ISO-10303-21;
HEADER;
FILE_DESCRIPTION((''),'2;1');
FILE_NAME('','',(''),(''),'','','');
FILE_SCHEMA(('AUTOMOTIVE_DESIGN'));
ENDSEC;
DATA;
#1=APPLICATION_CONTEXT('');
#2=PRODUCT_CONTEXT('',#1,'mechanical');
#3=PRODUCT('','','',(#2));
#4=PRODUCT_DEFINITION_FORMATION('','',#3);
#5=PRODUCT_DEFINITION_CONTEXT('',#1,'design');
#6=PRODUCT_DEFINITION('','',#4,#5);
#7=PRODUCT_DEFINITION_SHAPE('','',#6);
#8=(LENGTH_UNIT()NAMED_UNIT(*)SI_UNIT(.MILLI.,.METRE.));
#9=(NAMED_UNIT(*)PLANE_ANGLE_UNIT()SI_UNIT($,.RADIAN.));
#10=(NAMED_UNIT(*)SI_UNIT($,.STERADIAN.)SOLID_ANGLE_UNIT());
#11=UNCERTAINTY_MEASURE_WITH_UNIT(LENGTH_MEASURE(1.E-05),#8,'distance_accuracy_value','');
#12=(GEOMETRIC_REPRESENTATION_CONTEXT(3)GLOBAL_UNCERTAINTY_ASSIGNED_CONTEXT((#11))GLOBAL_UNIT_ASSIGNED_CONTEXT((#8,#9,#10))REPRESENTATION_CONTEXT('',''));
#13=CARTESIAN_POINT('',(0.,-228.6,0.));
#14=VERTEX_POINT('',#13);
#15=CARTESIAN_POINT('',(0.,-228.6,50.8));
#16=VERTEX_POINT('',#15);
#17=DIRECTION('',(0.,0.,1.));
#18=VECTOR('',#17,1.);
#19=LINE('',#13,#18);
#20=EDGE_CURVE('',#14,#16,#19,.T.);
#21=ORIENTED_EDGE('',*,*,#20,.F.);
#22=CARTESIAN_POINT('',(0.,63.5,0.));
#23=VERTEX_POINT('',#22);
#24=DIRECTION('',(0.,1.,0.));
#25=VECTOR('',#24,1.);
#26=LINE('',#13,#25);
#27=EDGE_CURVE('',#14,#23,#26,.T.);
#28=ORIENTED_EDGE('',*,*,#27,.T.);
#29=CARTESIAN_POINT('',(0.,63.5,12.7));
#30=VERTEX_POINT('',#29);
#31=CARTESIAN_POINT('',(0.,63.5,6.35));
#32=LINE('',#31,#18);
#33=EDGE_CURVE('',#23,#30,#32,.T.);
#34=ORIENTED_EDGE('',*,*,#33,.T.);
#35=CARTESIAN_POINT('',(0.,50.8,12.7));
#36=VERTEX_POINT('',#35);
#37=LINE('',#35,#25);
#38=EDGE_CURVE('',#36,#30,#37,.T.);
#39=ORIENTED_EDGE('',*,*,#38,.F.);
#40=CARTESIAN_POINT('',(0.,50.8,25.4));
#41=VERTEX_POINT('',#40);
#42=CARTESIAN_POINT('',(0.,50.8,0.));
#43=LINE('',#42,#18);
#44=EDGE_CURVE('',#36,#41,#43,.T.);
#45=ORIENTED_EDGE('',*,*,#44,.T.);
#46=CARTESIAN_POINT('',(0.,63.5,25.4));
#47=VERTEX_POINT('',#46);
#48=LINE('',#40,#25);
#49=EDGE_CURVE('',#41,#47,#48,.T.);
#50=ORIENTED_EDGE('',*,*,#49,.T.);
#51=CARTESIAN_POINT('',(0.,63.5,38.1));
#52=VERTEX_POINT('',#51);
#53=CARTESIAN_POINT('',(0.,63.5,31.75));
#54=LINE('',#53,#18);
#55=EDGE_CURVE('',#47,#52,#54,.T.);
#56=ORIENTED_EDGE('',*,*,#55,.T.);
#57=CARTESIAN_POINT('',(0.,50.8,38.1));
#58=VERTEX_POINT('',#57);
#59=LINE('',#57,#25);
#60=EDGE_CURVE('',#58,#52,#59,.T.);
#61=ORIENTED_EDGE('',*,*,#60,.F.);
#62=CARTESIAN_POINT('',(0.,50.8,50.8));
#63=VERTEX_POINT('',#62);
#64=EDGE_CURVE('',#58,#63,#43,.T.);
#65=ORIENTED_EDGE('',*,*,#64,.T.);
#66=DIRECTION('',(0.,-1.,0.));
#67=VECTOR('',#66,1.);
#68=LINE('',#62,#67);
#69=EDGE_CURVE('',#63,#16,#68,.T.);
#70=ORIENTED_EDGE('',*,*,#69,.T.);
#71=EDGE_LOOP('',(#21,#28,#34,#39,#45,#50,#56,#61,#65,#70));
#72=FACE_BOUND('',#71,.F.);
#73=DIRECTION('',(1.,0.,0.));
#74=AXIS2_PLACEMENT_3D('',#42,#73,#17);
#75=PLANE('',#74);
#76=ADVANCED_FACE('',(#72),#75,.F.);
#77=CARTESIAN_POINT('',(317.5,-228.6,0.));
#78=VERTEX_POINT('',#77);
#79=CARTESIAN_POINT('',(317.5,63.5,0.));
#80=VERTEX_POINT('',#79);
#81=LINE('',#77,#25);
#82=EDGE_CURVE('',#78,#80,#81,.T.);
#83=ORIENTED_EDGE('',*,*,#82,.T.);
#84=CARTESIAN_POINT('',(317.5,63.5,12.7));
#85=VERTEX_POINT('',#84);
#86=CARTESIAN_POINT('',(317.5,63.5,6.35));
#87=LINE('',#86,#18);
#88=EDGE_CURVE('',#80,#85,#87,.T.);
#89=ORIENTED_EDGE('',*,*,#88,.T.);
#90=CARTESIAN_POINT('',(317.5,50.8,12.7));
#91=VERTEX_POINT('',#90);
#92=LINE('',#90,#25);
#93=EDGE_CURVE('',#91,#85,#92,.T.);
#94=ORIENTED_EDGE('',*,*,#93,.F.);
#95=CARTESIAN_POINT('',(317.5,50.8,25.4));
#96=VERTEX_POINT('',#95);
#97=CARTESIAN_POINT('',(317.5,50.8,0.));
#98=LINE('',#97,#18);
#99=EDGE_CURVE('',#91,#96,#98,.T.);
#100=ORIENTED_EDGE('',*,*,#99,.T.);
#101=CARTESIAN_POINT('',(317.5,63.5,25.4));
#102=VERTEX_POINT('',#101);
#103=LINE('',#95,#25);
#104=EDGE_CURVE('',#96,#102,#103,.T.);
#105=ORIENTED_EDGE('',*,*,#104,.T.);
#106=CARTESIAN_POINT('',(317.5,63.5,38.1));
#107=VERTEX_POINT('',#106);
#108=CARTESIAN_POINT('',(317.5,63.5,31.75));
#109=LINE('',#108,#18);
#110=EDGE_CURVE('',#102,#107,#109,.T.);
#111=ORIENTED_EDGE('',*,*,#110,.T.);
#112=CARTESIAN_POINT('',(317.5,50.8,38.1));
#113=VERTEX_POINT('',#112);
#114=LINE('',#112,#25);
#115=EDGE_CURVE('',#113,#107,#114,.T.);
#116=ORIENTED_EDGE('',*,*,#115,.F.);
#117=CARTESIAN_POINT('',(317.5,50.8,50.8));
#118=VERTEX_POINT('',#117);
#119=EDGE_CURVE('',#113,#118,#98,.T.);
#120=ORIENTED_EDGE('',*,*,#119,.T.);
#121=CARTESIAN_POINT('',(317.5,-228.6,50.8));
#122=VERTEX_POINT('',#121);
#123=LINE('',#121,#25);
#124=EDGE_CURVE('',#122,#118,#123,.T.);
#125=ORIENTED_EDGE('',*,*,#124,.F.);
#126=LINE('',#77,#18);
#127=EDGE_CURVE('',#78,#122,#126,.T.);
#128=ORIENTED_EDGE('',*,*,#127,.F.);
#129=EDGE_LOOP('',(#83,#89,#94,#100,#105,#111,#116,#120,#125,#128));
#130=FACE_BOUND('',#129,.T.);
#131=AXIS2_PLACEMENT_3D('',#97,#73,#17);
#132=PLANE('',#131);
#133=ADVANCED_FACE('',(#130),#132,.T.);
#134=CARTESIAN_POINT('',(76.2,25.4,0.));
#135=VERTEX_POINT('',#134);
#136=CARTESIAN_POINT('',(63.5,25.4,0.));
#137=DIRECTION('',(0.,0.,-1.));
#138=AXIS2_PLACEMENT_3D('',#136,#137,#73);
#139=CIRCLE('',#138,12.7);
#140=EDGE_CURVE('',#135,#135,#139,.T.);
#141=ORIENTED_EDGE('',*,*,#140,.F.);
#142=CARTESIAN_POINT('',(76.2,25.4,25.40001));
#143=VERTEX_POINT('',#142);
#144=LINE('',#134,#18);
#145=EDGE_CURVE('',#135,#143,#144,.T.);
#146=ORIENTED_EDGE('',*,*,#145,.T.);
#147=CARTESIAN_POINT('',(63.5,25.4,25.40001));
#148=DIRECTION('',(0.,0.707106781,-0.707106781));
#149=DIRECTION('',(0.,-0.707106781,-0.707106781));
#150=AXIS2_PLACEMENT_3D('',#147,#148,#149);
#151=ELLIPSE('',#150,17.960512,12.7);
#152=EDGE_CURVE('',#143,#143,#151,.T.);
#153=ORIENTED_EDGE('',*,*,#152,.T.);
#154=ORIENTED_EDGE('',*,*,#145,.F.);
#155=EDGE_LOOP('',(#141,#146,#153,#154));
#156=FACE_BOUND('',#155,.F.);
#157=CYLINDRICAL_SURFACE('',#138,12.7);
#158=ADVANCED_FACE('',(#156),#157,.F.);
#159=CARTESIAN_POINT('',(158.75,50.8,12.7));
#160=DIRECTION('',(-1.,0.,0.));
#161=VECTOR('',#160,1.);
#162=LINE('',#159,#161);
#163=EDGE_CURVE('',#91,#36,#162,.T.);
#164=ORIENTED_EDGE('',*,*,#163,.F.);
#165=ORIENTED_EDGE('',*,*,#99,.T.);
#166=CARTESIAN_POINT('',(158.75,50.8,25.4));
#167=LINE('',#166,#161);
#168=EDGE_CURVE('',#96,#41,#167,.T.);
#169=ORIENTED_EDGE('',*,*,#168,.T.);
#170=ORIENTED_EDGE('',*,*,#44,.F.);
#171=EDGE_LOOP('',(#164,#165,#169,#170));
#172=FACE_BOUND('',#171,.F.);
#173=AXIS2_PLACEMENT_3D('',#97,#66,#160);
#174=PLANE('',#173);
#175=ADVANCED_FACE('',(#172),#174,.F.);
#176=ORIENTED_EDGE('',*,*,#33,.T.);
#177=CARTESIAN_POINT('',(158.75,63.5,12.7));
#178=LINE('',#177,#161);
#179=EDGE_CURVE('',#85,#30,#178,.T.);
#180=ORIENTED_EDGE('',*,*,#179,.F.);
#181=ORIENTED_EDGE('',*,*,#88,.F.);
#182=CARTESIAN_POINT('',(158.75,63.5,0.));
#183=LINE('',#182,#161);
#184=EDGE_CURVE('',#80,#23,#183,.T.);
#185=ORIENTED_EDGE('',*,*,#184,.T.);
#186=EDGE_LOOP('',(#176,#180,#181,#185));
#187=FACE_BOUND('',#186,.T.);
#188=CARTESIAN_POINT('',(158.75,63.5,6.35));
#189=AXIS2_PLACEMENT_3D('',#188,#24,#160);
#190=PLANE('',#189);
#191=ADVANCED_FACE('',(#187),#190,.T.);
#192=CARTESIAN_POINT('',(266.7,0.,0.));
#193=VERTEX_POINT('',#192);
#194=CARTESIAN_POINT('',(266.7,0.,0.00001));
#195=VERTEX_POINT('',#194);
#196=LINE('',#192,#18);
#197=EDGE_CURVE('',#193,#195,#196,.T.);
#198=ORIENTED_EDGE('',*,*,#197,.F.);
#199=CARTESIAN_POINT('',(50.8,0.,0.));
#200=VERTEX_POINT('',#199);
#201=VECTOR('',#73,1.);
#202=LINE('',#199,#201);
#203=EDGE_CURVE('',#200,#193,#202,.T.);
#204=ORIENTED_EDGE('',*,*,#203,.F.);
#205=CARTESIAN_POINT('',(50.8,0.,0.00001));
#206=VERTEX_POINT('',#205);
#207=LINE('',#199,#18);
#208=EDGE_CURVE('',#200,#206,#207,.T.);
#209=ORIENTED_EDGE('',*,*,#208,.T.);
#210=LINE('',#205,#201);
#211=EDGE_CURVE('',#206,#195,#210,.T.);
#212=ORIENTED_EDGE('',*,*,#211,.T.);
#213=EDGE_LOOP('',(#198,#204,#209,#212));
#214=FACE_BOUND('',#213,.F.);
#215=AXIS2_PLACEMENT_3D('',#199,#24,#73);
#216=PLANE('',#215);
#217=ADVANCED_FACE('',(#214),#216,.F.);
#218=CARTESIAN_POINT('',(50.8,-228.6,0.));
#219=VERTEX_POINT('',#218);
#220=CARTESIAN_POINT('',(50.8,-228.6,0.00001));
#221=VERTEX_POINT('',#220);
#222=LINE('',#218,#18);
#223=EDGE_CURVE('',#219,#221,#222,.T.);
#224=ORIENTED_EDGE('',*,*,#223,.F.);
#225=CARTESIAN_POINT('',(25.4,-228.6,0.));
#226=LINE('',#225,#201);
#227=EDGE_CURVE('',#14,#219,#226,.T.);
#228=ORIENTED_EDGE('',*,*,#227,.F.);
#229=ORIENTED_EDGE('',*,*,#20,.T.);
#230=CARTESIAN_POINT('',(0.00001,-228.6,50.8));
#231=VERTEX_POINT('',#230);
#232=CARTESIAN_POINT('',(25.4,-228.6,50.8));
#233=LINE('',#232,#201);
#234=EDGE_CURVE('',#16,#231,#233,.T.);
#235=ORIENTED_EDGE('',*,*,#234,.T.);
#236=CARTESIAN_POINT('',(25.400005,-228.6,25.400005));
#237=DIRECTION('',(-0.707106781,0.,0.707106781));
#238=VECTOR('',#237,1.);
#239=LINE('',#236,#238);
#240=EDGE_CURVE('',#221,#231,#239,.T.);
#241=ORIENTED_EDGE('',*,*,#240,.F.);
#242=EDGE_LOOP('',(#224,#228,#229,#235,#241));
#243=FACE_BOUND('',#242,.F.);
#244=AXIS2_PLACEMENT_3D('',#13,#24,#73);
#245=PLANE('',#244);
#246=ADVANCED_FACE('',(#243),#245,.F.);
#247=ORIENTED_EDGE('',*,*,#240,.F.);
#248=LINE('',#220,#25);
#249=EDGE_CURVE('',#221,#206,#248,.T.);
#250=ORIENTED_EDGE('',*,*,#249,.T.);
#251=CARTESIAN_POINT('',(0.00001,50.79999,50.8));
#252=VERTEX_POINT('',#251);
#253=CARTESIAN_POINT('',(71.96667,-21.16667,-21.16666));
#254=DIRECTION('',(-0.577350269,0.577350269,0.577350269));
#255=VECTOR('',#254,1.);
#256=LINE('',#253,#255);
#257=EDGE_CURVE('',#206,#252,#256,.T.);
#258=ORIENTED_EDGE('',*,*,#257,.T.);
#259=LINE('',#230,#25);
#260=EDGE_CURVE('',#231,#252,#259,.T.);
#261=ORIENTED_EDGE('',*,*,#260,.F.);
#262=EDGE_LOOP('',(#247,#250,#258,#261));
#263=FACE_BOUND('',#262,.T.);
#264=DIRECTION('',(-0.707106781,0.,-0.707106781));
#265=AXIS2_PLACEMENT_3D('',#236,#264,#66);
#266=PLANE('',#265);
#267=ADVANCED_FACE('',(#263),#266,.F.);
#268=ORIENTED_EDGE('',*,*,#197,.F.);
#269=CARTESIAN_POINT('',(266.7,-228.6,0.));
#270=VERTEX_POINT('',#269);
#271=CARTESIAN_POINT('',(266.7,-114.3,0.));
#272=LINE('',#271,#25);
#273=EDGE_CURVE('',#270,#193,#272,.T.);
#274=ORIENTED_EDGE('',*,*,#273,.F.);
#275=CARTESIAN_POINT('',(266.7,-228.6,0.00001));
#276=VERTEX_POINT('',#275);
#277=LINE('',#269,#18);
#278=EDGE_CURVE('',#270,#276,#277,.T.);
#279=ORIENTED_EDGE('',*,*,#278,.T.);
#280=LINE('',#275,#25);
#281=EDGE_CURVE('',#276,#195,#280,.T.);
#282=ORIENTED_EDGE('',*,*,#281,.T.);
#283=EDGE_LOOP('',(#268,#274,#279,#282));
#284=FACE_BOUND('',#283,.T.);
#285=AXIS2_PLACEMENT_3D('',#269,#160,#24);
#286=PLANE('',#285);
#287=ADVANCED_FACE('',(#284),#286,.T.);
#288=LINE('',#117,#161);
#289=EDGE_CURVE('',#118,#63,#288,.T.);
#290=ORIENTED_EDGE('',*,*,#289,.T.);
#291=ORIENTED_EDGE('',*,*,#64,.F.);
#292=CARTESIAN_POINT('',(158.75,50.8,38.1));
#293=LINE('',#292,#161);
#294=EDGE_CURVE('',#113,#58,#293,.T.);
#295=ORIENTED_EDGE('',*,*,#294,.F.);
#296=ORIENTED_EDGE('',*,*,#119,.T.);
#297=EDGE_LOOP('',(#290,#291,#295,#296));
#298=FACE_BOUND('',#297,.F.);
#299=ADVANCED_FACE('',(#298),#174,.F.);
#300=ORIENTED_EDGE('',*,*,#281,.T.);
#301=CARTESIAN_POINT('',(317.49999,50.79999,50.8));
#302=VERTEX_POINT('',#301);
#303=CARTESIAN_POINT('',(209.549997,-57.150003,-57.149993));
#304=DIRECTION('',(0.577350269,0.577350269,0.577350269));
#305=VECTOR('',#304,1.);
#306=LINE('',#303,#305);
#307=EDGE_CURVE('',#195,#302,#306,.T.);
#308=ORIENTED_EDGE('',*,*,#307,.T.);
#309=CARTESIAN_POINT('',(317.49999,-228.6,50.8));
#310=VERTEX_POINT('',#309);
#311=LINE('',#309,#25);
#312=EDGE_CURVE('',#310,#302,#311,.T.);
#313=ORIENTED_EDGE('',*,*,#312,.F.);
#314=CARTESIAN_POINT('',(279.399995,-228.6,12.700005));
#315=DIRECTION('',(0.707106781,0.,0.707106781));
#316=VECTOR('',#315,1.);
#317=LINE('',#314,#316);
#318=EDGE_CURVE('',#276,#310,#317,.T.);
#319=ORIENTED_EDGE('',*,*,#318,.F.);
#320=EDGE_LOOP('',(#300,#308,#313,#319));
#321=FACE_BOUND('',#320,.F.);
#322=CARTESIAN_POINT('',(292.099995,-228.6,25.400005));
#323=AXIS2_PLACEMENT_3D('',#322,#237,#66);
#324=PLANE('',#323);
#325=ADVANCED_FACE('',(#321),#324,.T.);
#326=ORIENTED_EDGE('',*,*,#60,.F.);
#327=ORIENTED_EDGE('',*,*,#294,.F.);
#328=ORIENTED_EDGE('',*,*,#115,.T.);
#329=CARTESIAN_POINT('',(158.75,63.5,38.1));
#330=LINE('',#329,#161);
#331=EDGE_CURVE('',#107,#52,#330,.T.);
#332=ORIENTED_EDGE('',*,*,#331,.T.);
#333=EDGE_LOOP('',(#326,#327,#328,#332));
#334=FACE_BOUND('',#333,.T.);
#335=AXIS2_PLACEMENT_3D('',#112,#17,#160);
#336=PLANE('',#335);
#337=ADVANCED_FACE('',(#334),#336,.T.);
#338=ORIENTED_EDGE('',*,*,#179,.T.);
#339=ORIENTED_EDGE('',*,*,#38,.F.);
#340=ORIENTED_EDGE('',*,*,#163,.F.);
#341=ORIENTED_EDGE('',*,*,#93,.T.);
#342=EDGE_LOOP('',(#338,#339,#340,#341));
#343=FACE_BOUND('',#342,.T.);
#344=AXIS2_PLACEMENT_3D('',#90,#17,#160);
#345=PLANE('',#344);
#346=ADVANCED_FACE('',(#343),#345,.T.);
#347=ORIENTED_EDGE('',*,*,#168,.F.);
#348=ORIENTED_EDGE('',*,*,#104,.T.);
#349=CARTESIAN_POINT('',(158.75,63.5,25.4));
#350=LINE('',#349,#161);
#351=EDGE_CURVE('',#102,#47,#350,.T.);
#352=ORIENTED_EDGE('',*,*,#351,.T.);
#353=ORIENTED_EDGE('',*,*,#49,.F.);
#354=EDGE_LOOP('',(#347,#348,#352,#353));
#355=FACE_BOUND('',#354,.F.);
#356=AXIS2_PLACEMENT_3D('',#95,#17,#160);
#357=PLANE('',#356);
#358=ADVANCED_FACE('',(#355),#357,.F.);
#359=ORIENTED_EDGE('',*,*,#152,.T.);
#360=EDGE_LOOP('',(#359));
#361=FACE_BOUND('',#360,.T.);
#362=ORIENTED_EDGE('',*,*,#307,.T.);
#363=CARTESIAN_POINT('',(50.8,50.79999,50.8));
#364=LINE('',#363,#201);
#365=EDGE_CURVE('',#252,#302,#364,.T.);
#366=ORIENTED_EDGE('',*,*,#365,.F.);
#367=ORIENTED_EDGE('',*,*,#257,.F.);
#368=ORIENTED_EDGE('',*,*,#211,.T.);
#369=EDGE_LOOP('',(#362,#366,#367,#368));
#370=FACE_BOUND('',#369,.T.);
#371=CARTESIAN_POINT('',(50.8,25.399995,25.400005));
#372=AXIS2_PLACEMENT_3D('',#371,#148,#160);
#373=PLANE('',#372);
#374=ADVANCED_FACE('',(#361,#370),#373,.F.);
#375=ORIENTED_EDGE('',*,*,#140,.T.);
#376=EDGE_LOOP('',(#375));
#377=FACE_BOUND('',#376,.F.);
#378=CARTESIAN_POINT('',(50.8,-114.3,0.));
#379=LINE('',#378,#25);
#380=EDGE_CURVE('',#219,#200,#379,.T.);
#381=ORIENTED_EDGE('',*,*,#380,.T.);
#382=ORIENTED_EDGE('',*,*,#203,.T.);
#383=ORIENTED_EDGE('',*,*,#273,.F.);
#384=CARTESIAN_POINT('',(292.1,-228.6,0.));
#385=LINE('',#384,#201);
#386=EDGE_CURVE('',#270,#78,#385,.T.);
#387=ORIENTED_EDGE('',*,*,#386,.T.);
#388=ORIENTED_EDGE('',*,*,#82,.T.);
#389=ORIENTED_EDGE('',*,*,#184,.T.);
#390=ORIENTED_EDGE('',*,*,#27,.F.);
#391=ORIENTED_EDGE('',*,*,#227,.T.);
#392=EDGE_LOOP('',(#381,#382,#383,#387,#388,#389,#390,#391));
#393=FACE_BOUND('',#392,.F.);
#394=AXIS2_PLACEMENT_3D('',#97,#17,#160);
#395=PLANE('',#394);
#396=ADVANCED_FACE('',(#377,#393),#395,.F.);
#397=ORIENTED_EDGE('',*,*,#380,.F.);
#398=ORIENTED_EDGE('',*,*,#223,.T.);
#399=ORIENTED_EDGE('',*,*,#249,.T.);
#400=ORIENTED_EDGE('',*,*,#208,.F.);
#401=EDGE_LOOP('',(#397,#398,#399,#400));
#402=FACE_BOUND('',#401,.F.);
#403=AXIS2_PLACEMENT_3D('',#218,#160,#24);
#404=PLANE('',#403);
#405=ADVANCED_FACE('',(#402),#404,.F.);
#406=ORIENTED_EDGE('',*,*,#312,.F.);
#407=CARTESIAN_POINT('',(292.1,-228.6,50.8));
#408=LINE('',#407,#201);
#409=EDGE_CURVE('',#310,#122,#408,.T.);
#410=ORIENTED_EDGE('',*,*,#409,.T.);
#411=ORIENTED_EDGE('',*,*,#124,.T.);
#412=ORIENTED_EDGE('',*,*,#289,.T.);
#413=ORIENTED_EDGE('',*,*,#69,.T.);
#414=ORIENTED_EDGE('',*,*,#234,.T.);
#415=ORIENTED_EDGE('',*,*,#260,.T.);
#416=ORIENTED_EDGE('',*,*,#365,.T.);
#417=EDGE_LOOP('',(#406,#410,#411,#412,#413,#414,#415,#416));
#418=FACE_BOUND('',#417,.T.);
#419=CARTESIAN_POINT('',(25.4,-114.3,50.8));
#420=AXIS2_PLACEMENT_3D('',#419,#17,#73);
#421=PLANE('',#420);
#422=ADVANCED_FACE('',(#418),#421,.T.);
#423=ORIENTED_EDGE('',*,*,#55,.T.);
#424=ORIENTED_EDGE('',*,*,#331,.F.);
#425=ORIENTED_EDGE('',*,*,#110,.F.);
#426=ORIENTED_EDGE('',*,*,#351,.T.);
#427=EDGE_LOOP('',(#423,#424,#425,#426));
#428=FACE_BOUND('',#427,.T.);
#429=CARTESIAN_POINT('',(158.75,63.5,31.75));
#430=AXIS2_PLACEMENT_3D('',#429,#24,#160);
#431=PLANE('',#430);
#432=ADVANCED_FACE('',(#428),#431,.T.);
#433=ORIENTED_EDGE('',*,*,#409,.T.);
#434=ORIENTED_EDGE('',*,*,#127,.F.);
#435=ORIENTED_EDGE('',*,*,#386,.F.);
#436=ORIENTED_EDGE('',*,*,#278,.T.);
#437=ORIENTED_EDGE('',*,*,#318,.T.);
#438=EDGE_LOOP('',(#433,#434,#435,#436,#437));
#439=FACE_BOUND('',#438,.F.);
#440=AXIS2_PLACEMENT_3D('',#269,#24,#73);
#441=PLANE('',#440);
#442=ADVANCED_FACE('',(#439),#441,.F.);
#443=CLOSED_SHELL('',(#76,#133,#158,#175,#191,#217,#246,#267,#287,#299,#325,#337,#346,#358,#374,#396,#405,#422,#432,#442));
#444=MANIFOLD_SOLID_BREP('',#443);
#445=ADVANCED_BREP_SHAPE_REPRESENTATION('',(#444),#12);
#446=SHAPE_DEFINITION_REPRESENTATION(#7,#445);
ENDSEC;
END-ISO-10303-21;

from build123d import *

# Parameters (mm, degrees)
F0_W     = 50.8
F0_H     = 228.6
F1_DEPTH = 50.8
F2_SIZE  = 50.79999
F4_R     = 12.7
F5_DEPTH = 63.5
F3_W     = 317.5
F3_H     = 12.7
F6_DEPTH = 12.7


# Not quite as in the source:
# - a fillet or chamfer is up to 0.001 mm smaller than in the source, because OpenCascade refuses the exact size


with BuildPart() as f1:
    # F0 (on Top) → F1 (new body)
    with BuildSketch(Plane.XY):
        with Locations((25.4, -114.3)):
            Rectangle(F0_W, F0_H)
        Polygon((0, 50.8), (0, 0), (50.8, 0), (266.7, 0), (317.5, 0), (317.5, 50.8), align=None)
        with Locations((292.1, -114.3)):
            Rectangle(F0_W, F0_H)
    extrude(amount=F1_DEPTH)

    # F2 (size 50.8 in the source; OpenCascade refuses exactly that, so slightly less here)
    f2_edges = [f1.edges().sort_by_distance(p)[0] for p in [
        (50.8, -114.3, 50.8),
        (158.75, 0, 50.8),
        (266.7, -114.3, 50.8),
    ]]
    chamfer(f2_edges, length=F2_SIZE)

    # F4 (on face) → F5 (cut)
    with BuildSketch(Plane(origin=(0, 0, 0), x_dir=(1, 0, 0), z_dir=(0, 0, -1))):
        with Locations((63.5, -25.4)):
            Circle(F4_R)
    extrude(amount=-F5_DEPTH, mode=Mode.SUBTRACT)

    # F3 (on face) → F6 (join)
    with BuildSketch(Plane(origin=(0, 50.8, 0), x_dir=(-1, 0, 0), z_dir=(0, 1, 0))):
        with Locations((-158.75, 6.35)):
            Rectangle(F3_W, F3_H)
        with Locations((-158.75, 31.75)):
            Rectangle(F3_W, F3_H)
    extrude(amount=F6_DEPTH)


solid = f1.part
